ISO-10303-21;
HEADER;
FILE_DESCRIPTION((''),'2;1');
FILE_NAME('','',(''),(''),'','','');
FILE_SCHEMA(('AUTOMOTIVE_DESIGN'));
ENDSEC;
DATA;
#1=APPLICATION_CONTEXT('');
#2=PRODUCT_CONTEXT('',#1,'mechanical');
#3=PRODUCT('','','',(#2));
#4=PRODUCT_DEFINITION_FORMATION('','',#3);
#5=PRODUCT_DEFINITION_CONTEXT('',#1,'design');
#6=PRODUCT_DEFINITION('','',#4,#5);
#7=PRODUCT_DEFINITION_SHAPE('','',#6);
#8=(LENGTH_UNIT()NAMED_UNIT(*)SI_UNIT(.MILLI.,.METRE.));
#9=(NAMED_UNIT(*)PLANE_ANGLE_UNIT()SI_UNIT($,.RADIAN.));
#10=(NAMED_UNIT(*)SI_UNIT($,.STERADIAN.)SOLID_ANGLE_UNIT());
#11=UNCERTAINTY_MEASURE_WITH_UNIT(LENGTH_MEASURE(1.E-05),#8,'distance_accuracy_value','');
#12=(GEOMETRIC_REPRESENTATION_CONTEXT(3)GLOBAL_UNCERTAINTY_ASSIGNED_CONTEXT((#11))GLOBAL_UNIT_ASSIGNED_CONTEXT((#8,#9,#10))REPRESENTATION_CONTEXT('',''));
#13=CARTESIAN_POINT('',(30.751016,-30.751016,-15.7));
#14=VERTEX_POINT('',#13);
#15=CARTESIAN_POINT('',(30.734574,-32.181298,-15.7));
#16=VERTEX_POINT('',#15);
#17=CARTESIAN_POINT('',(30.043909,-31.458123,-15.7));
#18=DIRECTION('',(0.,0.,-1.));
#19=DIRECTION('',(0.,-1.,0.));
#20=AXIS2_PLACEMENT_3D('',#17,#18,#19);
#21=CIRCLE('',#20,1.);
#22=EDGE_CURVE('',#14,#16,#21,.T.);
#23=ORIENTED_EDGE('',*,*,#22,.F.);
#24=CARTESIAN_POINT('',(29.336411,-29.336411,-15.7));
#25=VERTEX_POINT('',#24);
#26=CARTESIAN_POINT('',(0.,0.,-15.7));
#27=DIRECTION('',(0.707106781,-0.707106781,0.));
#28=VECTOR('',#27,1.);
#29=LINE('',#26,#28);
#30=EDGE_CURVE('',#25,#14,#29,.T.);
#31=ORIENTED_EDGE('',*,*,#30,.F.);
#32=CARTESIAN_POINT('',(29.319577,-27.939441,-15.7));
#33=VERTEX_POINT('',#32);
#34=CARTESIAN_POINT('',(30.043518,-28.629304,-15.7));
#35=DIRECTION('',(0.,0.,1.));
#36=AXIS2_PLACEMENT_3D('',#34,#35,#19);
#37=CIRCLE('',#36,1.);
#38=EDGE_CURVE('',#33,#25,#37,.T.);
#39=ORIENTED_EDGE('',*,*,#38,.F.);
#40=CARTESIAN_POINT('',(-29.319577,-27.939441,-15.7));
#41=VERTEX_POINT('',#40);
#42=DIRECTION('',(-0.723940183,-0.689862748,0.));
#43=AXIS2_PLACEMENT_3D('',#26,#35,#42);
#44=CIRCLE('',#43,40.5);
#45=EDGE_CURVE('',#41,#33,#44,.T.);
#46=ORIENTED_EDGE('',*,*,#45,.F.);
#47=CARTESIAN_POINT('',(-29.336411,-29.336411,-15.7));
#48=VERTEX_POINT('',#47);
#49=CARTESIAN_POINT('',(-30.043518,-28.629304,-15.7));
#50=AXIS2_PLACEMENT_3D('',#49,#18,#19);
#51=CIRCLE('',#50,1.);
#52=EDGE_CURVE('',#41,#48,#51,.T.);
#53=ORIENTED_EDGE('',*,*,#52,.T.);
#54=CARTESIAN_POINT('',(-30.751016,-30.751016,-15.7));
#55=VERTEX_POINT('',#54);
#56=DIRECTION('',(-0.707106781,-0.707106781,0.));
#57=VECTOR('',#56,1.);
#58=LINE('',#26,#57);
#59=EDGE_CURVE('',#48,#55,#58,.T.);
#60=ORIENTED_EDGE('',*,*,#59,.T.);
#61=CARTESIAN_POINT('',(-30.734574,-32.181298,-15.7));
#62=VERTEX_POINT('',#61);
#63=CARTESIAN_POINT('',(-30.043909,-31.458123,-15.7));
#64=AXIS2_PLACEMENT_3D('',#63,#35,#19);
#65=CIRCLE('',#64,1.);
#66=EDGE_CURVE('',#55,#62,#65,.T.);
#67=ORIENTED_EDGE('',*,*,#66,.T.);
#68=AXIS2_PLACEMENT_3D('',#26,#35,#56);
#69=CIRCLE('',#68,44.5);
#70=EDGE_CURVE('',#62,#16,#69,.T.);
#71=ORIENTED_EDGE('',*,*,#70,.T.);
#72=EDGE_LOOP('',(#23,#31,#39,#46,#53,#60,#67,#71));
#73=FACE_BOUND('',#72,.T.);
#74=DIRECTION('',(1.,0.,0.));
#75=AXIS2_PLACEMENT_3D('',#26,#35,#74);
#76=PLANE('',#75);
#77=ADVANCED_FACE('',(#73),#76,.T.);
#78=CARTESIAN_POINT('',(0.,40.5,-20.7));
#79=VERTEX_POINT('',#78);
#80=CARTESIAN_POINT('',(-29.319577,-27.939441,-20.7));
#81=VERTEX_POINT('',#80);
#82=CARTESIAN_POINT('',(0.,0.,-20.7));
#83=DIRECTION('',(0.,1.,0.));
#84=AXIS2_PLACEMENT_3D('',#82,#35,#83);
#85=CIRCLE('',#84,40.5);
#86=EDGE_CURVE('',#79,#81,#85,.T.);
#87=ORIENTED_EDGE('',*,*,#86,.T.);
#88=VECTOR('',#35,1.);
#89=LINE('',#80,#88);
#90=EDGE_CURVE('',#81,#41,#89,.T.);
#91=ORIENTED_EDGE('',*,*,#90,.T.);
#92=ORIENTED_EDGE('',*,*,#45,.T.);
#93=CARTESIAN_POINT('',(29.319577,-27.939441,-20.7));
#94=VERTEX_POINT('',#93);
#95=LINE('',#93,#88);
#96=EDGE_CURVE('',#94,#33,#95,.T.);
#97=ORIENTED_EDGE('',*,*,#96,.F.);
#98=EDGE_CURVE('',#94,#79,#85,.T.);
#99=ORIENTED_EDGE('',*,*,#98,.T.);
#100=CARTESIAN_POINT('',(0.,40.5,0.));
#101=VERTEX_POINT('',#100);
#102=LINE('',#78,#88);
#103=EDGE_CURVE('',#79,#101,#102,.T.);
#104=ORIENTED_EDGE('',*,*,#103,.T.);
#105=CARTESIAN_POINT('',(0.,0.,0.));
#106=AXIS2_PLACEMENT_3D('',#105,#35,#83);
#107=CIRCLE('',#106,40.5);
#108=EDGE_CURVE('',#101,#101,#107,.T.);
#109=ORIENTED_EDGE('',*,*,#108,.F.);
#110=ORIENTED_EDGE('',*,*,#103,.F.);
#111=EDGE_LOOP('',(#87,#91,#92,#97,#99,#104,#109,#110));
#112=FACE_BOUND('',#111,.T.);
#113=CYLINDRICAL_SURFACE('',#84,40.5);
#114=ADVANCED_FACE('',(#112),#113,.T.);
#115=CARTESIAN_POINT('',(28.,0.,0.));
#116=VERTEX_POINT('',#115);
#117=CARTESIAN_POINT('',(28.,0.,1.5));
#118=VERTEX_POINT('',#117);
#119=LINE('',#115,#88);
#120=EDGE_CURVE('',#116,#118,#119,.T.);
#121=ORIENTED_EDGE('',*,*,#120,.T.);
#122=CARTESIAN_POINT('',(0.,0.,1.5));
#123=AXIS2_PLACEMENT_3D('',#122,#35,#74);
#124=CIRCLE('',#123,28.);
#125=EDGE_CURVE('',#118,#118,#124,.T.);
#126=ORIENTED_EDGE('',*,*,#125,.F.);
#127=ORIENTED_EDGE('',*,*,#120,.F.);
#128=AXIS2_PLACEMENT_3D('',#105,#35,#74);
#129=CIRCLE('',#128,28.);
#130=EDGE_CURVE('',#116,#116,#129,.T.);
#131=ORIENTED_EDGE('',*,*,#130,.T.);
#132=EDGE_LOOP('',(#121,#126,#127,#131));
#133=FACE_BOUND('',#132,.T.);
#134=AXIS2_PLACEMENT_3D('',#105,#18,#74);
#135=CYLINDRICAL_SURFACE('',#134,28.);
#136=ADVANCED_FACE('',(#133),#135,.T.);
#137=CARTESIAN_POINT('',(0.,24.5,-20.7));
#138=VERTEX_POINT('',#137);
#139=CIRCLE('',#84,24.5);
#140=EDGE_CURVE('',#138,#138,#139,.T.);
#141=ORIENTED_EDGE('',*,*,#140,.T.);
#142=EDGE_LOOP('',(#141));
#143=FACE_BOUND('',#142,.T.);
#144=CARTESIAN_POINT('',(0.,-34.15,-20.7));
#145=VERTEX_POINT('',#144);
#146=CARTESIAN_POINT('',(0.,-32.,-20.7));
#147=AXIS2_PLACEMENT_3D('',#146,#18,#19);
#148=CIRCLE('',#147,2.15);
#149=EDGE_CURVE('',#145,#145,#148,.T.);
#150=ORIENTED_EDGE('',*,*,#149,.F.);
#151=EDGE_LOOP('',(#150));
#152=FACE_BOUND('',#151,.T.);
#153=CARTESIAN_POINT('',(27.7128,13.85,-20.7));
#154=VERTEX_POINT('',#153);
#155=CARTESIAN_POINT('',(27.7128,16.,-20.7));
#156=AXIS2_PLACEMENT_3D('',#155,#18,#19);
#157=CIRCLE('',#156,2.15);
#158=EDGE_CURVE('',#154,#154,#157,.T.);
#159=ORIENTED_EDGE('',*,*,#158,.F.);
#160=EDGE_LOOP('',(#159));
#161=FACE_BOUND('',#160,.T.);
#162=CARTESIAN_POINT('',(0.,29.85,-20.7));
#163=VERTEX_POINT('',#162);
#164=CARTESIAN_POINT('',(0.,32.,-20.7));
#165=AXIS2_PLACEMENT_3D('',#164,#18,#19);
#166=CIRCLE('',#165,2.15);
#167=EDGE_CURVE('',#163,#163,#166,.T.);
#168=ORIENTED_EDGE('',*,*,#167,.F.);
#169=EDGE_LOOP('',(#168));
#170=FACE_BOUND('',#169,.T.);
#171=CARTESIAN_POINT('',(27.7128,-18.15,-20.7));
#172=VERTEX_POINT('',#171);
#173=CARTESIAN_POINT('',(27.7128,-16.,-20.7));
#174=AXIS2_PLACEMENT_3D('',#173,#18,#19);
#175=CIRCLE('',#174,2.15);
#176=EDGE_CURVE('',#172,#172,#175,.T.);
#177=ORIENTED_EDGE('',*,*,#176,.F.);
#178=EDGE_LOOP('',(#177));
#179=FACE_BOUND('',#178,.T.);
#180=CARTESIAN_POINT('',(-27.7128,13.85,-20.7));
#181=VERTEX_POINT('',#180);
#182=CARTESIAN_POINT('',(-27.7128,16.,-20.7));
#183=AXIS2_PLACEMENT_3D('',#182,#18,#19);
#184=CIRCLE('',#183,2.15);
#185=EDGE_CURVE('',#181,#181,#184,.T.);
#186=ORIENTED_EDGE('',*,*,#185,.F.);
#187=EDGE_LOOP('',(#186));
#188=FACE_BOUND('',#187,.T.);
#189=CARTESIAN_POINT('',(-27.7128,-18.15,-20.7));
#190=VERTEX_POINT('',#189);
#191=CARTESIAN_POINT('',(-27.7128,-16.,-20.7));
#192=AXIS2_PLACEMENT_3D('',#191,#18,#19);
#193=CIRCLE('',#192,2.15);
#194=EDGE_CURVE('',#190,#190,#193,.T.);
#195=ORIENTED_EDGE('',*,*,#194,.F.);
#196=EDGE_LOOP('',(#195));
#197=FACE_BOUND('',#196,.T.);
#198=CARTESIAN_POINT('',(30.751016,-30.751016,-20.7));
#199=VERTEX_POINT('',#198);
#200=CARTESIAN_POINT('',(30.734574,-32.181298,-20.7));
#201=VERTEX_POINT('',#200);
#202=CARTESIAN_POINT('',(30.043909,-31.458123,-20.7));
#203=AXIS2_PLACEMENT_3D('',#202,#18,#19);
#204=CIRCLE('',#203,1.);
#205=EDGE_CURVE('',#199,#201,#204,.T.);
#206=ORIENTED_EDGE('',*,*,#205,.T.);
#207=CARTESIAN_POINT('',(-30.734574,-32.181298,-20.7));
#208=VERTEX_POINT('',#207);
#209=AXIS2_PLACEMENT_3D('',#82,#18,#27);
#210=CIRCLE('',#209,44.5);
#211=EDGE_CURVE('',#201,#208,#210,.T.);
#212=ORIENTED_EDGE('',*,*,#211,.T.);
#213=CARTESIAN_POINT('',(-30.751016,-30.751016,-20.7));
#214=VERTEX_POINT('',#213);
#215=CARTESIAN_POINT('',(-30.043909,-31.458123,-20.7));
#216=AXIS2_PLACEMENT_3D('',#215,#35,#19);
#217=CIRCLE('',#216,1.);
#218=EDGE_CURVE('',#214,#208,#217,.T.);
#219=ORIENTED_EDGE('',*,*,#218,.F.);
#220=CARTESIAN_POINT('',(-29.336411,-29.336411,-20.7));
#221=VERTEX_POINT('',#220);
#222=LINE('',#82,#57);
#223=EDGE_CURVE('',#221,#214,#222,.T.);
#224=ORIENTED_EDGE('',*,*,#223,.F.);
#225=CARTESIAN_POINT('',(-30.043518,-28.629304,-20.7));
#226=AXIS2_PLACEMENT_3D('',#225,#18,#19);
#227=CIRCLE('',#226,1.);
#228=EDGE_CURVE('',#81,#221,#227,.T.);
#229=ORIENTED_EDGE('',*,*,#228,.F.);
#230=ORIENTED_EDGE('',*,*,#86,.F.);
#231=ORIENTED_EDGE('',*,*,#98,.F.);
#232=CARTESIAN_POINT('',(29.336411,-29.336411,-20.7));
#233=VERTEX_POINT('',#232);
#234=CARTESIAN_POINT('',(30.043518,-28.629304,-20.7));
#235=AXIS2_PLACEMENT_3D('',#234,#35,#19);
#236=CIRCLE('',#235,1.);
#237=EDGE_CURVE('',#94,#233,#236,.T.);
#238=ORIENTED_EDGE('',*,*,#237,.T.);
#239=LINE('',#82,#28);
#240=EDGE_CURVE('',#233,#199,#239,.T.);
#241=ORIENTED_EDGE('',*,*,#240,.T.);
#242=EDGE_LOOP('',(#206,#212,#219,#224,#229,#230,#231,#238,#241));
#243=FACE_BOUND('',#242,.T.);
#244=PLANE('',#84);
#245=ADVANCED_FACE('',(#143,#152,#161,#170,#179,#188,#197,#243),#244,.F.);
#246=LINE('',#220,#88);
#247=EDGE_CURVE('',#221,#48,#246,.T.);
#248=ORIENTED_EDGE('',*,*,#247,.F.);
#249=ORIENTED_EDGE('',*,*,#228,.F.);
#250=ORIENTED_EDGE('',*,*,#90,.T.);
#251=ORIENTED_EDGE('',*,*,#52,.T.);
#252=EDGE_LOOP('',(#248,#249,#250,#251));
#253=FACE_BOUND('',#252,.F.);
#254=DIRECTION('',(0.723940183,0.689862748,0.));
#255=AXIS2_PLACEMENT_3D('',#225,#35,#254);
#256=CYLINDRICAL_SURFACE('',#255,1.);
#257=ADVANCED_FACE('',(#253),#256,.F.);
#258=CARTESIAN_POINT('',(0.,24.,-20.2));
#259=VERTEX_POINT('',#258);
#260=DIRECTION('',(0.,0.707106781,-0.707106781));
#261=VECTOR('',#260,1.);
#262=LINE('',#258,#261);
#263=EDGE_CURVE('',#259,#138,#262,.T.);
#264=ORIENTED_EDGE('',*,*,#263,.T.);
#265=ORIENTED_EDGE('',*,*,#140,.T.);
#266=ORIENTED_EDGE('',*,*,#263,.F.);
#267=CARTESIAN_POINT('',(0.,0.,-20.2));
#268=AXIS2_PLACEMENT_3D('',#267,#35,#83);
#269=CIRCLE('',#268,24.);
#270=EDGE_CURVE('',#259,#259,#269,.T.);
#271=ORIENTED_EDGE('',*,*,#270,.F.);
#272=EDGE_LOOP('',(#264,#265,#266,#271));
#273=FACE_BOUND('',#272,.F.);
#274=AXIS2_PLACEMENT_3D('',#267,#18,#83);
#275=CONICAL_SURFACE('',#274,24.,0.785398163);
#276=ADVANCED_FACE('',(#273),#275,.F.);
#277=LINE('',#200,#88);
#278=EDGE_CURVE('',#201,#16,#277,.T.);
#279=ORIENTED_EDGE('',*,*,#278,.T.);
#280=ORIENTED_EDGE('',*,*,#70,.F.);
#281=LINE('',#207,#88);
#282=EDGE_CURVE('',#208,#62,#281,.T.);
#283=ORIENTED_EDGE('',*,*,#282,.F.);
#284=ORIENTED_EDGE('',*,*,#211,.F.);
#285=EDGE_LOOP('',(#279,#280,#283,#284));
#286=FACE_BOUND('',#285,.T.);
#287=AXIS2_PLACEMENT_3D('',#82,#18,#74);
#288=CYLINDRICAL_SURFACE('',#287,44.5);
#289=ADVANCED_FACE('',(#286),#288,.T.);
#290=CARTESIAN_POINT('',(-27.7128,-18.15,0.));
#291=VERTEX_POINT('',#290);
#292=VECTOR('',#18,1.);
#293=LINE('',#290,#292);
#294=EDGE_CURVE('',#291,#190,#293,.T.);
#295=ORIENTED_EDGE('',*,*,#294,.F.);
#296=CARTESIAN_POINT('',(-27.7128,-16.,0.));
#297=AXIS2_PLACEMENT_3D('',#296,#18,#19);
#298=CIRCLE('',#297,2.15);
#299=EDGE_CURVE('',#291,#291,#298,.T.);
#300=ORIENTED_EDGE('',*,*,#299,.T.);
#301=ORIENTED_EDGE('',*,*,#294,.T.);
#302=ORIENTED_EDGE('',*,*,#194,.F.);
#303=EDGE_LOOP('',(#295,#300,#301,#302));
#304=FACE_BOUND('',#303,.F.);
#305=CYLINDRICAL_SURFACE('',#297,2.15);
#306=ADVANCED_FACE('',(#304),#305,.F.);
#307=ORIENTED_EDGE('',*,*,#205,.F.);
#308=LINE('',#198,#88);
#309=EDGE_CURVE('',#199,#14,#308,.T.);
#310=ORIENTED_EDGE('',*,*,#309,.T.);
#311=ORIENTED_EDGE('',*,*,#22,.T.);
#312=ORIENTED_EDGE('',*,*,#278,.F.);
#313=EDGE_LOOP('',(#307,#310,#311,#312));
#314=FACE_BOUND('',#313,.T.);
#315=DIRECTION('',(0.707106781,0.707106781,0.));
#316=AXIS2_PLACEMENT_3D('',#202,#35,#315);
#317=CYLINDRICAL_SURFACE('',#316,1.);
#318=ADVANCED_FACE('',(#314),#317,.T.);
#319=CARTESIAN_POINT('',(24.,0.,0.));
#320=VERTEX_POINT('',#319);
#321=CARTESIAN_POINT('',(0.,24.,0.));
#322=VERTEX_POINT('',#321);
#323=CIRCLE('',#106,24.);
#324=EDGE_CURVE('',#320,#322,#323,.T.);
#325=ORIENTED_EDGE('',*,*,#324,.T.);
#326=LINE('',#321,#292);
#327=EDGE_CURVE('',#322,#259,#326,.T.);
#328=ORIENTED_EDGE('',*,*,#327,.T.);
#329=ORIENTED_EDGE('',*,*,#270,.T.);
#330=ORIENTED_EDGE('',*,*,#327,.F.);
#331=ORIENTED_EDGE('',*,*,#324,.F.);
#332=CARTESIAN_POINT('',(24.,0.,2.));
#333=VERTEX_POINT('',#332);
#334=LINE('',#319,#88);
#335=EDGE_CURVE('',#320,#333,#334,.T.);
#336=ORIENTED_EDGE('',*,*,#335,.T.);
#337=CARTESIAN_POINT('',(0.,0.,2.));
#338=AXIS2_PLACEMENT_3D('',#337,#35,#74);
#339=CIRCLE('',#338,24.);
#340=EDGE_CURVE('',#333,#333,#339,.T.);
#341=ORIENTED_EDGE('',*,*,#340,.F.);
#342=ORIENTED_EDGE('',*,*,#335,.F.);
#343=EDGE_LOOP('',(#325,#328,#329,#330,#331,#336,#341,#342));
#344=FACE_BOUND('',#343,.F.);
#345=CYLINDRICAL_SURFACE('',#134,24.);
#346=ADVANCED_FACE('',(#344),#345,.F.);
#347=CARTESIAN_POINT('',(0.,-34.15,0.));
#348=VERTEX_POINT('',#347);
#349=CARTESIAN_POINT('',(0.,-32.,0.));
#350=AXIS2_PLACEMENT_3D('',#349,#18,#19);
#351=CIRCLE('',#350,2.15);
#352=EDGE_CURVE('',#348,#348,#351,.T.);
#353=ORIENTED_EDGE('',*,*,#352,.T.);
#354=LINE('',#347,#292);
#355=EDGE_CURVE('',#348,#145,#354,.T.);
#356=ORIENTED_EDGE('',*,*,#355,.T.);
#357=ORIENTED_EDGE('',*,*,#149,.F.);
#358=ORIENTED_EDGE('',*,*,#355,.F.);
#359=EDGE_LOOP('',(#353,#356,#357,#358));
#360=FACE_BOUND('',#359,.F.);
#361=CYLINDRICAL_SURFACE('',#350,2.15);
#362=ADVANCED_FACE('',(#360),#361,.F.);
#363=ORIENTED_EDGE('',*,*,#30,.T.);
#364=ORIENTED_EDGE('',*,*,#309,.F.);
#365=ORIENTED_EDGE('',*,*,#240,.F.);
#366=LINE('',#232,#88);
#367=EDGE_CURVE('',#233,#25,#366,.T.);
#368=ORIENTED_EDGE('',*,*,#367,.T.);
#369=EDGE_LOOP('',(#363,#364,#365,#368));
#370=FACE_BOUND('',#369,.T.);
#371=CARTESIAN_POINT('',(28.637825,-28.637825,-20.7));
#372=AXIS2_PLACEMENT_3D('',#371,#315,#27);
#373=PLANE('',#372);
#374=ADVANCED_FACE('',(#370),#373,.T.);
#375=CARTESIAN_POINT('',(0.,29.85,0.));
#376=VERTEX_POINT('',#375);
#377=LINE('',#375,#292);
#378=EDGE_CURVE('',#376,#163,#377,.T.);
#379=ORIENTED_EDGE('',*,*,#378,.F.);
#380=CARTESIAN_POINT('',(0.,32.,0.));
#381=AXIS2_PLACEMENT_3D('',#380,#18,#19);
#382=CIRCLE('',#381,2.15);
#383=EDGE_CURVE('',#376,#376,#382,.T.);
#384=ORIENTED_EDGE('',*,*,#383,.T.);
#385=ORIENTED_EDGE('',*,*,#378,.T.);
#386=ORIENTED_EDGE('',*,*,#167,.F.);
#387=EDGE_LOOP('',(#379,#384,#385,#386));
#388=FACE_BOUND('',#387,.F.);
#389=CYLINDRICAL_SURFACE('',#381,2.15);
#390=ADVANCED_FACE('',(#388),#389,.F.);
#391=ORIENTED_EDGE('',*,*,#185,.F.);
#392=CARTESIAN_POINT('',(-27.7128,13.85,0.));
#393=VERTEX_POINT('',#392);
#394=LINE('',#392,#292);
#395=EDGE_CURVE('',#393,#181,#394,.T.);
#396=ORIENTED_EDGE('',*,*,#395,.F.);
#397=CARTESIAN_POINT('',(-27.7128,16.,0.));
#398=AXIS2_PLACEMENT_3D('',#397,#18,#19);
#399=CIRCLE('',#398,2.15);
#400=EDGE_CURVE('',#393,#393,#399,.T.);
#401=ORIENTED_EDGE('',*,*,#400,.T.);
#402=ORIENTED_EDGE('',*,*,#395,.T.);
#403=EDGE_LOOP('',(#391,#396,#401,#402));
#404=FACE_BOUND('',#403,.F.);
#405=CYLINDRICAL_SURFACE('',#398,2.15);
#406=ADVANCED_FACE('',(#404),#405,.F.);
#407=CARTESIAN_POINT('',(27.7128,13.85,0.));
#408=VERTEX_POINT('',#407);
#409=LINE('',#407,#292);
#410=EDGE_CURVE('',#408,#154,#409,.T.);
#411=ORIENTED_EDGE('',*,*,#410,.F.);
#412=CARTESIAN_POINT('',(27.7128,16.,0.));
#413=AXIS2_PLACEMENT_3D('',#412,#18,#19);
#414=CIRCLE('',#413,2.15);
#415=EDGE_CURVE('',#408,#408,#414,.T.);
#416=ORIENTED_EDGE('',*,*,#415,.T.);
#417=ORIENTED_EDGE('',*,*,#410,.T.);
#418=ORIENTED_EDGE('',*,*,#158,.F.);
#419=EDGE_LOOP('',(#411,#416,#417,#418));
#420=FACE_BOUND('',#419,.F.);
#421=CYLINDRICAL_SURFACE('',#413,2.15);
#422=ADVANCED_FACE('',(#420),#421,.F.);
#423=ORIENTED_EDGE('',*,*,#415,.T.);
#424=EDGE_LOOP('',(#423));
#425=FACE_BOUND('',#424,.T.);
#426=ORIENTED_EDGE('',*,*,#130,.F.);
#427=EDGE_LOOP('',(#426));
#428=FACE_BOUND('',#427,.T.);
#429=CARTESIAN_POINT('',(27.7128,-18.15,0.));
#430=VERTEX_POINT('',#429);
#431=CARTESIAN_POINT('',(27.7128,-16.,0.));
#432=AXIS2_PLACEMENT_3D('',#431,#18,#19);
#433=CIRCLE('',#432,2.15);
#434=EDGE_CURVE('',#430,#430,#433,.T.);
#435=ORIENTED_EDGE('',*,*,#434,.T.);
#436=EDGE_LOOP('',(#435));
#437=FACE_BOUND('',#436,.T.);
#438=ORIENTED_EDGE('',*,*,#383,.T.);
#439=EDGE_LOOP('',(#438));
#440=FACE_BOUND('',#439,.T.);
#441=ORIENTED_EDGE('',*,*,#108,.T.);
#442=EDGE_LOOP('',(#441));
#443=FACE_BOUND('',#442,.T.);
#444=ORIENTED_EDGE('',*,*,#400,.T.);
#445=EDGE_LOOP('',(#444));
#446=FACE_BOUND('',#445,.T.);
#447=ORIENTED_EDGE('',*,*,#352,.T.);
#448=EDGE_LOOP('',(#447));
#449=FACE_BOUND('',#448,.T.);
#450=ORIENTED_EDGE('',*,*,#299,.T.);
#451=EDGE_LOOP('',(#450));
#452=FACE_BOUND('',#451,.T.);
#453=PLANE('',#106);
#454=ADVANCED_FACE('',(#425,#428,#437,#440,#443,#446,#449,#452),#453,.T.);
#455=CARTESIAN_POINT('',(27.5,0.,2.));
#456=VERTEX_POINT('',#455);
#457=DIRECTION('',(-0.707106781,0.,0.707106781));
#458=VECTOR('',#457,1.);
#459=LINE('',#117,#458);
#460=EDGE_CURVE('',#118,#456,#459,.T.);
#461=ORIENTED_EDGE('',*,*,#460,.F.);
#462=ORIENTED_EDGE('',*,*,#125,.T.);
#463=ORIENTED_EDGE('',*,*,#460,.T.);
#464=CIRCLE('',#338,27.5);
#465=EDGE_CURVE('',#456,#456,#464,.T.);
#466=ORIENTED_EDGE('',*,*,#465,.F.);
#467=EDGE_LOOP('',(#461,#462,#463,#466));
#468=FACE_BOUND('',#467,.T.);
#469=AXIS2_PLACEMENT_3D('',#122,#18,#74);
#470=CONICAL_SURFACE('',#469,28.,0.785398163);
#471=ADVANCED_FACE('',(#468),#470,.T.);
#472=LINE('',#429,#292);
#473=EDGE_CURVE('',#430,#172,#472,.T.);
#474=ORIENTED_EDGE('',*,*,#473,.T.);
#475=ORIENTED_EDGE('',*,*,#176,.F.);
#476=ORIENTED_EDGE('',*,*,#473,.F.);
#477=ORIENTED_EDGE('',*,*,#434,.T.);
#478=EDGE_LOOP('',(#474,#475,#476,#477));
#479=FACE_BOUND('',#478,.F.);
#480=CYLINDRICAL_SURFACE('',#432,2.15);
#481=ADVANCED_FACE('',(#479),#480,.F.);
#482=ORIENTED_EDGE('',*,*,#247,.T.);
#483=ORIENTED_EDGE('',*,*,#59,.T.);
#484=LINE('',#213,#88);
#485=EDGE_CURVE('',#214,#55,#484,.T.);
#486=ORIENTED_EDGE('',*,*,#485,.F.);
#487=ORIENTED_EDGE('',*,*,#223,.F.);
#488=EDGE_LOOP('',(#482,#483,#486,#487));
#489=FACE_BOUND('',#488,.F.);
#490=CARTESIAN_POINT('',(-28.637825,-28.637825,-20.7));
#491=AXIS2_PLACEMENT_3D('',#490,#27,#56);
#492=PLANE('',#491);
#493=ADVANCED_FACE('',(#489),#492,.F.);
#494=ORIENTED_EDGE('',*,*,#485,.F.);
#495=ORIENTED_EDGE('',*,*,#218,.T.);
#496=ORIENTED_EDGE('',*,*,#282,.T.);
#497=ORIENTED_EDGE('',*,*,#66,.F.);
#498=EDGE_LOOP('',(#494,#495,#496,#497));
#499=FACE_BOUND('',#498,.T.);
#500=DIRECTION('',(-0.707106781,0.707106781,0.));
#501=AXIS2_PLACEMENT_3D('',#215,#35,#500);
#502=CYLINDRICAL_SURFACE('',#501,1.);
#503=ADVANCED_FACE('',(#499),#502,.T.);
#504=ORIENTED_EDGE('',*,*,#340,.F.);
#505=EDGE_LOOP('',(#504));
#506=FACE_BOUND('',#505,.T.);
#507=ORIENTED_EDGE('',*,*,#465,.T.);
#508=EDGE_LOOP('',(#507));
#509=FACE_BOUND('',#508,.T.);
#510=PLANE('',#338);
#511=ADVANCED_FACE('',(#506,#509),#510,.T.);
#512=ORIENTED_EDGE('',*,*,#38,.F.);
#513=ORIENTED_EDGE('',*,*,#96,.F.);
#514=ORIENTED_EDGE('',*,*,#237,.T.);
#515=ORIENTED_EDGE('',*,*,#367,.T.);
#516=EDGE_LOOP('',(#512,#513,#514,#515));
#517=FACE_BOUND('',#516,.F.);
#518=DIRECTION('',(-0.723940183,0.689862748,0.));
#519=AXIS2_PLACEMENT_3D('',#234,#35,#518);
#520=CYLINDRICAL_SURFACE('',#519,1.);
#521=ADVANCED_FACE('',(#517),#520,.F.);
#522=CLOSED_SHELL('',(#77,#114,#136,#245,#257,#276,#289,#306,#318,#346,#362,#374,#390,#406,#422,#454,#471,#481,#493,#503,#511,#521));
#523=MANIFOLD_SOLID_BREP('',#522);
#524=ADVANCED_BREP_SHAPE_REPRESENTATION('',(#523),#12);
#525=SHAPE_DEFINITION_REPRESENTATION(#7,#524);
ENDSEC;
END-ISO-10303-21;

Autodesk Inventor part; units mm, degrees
ref_plane "YZ Plane" through (0, 0, 0) normal (1, 0, 0) x (0, 1, 0)
ref_plane "XZ Plane" through (0, 0, 0) normal (0, 1, 0) x (-1, 0, 0)
ref_plane "XY Plane" through (0, 0, 0) normal (0, 0, 1) x (1, 0, 0)
sketch "スケッチ1" plane through (0, 0, 0) normal (1, 0, 0) x (0, 1, 0)
  line L0 (40.5, 0) -> (24, 0)
  line L1 (24, 0) -> (24, -20.7)
  line L2 (24, -20.7) -> (40.5, -20.7)
  line L3 (40.5, -20.7) -> (40.5, 0)
  line L4 (0, -24.84) -> (0, 4.14) projected
  point P0 (0, 0)
  dimension "d0" = 24
  dimension "d2" = 40.5
  dimension "d3" = 20.7
revolve "回転1" add sketch "スケッチ1" angle 360 about axis through (0, 0, -10) along (0, 0, 1)
sketch "スケッチ2" plane through (0, 0, 0) normal (0, 0, 1) x (1, 0, 0)
  circle A0 centre (0, 0) radius 32
  point P0 (0, 32)
  point P1 (-27.7128, 16)
  point P2 (-27.7128, -16)
  point P3 (0, -32)
  point P4 (27.7128, -16)
  point P5 (27.7128, 16)
  dimension "d5" = 64
  dimension "d8" = 360
hole "穴1" at (0, 32, 0) at (-27.7128, 16, 0) at (-27.7128, -16, 0) at (0, -32, 0) at (27.7128, -16, 0) at (27.7128, 16, 0) direction (0, 0, -1) diameter 4.3 end through all clearance for "Socket Head Cap Screw" size "M4" standard "Ansi Metric M Profile"
sketch "スケッチ3" plane through (0, 0, -20.7) normal (0, 0, 1) x (1, 0, 0)
  circle A0 centre (0, 0) radius 40.5 projected
  circle A1 centre (0, 0) radius 44.5
  line L0 (0, 0) -> (-31.4663, -31.4663)
  line L1 (0, 0) -> (31.4663, -31.4663)
  line L2 (0, 62.3) -> (0, -62.3) projected
  point P0 (-28.6378, -28.6378)
  point P1 (28.6378, -28.6378)
  point P2 (19.901, -39.802)
  dimension "d17" = 4
  dimension "d23" = 45
  dimension "d24" = 45
extrude "押し出し1" add sketch "スケッチ3" along normal blind 5 contours L1 A1 L2 A0 | A0 L2 A1 L0 picked at (28.2757, -32.3682) picked at (-28.2757, -32.3682)
fillet "フィレット1" radius 1 4 edges at (-31.4663, -31.4663, -18.2) (31.4663, -31.4663, -18.2) (28.6378, -28.6378, -18.2) (-28.6378, -28.6378, -18.2)
sketch "スケッチ5" plane through (0, 0, 0) normal (0, 0, 1) x (1, 0, 0)
  circle A0 centre (0, 0) radius 24 projected
  circle A1 centre (0, 0) radius 28
  dimension "d28" = 4
extrude "押し出し3" add sketch "スケッチ5" along normal blind 2
chamfer "面取り1" distance 0.5 angle 45 1 edges at (-28, 0, 2)
chamfer "面取り2" distance 0.5 angle 45 1 edges at (0, -24, -20.7)
properties part number "unit-base7" material "ABS プラスチック"
